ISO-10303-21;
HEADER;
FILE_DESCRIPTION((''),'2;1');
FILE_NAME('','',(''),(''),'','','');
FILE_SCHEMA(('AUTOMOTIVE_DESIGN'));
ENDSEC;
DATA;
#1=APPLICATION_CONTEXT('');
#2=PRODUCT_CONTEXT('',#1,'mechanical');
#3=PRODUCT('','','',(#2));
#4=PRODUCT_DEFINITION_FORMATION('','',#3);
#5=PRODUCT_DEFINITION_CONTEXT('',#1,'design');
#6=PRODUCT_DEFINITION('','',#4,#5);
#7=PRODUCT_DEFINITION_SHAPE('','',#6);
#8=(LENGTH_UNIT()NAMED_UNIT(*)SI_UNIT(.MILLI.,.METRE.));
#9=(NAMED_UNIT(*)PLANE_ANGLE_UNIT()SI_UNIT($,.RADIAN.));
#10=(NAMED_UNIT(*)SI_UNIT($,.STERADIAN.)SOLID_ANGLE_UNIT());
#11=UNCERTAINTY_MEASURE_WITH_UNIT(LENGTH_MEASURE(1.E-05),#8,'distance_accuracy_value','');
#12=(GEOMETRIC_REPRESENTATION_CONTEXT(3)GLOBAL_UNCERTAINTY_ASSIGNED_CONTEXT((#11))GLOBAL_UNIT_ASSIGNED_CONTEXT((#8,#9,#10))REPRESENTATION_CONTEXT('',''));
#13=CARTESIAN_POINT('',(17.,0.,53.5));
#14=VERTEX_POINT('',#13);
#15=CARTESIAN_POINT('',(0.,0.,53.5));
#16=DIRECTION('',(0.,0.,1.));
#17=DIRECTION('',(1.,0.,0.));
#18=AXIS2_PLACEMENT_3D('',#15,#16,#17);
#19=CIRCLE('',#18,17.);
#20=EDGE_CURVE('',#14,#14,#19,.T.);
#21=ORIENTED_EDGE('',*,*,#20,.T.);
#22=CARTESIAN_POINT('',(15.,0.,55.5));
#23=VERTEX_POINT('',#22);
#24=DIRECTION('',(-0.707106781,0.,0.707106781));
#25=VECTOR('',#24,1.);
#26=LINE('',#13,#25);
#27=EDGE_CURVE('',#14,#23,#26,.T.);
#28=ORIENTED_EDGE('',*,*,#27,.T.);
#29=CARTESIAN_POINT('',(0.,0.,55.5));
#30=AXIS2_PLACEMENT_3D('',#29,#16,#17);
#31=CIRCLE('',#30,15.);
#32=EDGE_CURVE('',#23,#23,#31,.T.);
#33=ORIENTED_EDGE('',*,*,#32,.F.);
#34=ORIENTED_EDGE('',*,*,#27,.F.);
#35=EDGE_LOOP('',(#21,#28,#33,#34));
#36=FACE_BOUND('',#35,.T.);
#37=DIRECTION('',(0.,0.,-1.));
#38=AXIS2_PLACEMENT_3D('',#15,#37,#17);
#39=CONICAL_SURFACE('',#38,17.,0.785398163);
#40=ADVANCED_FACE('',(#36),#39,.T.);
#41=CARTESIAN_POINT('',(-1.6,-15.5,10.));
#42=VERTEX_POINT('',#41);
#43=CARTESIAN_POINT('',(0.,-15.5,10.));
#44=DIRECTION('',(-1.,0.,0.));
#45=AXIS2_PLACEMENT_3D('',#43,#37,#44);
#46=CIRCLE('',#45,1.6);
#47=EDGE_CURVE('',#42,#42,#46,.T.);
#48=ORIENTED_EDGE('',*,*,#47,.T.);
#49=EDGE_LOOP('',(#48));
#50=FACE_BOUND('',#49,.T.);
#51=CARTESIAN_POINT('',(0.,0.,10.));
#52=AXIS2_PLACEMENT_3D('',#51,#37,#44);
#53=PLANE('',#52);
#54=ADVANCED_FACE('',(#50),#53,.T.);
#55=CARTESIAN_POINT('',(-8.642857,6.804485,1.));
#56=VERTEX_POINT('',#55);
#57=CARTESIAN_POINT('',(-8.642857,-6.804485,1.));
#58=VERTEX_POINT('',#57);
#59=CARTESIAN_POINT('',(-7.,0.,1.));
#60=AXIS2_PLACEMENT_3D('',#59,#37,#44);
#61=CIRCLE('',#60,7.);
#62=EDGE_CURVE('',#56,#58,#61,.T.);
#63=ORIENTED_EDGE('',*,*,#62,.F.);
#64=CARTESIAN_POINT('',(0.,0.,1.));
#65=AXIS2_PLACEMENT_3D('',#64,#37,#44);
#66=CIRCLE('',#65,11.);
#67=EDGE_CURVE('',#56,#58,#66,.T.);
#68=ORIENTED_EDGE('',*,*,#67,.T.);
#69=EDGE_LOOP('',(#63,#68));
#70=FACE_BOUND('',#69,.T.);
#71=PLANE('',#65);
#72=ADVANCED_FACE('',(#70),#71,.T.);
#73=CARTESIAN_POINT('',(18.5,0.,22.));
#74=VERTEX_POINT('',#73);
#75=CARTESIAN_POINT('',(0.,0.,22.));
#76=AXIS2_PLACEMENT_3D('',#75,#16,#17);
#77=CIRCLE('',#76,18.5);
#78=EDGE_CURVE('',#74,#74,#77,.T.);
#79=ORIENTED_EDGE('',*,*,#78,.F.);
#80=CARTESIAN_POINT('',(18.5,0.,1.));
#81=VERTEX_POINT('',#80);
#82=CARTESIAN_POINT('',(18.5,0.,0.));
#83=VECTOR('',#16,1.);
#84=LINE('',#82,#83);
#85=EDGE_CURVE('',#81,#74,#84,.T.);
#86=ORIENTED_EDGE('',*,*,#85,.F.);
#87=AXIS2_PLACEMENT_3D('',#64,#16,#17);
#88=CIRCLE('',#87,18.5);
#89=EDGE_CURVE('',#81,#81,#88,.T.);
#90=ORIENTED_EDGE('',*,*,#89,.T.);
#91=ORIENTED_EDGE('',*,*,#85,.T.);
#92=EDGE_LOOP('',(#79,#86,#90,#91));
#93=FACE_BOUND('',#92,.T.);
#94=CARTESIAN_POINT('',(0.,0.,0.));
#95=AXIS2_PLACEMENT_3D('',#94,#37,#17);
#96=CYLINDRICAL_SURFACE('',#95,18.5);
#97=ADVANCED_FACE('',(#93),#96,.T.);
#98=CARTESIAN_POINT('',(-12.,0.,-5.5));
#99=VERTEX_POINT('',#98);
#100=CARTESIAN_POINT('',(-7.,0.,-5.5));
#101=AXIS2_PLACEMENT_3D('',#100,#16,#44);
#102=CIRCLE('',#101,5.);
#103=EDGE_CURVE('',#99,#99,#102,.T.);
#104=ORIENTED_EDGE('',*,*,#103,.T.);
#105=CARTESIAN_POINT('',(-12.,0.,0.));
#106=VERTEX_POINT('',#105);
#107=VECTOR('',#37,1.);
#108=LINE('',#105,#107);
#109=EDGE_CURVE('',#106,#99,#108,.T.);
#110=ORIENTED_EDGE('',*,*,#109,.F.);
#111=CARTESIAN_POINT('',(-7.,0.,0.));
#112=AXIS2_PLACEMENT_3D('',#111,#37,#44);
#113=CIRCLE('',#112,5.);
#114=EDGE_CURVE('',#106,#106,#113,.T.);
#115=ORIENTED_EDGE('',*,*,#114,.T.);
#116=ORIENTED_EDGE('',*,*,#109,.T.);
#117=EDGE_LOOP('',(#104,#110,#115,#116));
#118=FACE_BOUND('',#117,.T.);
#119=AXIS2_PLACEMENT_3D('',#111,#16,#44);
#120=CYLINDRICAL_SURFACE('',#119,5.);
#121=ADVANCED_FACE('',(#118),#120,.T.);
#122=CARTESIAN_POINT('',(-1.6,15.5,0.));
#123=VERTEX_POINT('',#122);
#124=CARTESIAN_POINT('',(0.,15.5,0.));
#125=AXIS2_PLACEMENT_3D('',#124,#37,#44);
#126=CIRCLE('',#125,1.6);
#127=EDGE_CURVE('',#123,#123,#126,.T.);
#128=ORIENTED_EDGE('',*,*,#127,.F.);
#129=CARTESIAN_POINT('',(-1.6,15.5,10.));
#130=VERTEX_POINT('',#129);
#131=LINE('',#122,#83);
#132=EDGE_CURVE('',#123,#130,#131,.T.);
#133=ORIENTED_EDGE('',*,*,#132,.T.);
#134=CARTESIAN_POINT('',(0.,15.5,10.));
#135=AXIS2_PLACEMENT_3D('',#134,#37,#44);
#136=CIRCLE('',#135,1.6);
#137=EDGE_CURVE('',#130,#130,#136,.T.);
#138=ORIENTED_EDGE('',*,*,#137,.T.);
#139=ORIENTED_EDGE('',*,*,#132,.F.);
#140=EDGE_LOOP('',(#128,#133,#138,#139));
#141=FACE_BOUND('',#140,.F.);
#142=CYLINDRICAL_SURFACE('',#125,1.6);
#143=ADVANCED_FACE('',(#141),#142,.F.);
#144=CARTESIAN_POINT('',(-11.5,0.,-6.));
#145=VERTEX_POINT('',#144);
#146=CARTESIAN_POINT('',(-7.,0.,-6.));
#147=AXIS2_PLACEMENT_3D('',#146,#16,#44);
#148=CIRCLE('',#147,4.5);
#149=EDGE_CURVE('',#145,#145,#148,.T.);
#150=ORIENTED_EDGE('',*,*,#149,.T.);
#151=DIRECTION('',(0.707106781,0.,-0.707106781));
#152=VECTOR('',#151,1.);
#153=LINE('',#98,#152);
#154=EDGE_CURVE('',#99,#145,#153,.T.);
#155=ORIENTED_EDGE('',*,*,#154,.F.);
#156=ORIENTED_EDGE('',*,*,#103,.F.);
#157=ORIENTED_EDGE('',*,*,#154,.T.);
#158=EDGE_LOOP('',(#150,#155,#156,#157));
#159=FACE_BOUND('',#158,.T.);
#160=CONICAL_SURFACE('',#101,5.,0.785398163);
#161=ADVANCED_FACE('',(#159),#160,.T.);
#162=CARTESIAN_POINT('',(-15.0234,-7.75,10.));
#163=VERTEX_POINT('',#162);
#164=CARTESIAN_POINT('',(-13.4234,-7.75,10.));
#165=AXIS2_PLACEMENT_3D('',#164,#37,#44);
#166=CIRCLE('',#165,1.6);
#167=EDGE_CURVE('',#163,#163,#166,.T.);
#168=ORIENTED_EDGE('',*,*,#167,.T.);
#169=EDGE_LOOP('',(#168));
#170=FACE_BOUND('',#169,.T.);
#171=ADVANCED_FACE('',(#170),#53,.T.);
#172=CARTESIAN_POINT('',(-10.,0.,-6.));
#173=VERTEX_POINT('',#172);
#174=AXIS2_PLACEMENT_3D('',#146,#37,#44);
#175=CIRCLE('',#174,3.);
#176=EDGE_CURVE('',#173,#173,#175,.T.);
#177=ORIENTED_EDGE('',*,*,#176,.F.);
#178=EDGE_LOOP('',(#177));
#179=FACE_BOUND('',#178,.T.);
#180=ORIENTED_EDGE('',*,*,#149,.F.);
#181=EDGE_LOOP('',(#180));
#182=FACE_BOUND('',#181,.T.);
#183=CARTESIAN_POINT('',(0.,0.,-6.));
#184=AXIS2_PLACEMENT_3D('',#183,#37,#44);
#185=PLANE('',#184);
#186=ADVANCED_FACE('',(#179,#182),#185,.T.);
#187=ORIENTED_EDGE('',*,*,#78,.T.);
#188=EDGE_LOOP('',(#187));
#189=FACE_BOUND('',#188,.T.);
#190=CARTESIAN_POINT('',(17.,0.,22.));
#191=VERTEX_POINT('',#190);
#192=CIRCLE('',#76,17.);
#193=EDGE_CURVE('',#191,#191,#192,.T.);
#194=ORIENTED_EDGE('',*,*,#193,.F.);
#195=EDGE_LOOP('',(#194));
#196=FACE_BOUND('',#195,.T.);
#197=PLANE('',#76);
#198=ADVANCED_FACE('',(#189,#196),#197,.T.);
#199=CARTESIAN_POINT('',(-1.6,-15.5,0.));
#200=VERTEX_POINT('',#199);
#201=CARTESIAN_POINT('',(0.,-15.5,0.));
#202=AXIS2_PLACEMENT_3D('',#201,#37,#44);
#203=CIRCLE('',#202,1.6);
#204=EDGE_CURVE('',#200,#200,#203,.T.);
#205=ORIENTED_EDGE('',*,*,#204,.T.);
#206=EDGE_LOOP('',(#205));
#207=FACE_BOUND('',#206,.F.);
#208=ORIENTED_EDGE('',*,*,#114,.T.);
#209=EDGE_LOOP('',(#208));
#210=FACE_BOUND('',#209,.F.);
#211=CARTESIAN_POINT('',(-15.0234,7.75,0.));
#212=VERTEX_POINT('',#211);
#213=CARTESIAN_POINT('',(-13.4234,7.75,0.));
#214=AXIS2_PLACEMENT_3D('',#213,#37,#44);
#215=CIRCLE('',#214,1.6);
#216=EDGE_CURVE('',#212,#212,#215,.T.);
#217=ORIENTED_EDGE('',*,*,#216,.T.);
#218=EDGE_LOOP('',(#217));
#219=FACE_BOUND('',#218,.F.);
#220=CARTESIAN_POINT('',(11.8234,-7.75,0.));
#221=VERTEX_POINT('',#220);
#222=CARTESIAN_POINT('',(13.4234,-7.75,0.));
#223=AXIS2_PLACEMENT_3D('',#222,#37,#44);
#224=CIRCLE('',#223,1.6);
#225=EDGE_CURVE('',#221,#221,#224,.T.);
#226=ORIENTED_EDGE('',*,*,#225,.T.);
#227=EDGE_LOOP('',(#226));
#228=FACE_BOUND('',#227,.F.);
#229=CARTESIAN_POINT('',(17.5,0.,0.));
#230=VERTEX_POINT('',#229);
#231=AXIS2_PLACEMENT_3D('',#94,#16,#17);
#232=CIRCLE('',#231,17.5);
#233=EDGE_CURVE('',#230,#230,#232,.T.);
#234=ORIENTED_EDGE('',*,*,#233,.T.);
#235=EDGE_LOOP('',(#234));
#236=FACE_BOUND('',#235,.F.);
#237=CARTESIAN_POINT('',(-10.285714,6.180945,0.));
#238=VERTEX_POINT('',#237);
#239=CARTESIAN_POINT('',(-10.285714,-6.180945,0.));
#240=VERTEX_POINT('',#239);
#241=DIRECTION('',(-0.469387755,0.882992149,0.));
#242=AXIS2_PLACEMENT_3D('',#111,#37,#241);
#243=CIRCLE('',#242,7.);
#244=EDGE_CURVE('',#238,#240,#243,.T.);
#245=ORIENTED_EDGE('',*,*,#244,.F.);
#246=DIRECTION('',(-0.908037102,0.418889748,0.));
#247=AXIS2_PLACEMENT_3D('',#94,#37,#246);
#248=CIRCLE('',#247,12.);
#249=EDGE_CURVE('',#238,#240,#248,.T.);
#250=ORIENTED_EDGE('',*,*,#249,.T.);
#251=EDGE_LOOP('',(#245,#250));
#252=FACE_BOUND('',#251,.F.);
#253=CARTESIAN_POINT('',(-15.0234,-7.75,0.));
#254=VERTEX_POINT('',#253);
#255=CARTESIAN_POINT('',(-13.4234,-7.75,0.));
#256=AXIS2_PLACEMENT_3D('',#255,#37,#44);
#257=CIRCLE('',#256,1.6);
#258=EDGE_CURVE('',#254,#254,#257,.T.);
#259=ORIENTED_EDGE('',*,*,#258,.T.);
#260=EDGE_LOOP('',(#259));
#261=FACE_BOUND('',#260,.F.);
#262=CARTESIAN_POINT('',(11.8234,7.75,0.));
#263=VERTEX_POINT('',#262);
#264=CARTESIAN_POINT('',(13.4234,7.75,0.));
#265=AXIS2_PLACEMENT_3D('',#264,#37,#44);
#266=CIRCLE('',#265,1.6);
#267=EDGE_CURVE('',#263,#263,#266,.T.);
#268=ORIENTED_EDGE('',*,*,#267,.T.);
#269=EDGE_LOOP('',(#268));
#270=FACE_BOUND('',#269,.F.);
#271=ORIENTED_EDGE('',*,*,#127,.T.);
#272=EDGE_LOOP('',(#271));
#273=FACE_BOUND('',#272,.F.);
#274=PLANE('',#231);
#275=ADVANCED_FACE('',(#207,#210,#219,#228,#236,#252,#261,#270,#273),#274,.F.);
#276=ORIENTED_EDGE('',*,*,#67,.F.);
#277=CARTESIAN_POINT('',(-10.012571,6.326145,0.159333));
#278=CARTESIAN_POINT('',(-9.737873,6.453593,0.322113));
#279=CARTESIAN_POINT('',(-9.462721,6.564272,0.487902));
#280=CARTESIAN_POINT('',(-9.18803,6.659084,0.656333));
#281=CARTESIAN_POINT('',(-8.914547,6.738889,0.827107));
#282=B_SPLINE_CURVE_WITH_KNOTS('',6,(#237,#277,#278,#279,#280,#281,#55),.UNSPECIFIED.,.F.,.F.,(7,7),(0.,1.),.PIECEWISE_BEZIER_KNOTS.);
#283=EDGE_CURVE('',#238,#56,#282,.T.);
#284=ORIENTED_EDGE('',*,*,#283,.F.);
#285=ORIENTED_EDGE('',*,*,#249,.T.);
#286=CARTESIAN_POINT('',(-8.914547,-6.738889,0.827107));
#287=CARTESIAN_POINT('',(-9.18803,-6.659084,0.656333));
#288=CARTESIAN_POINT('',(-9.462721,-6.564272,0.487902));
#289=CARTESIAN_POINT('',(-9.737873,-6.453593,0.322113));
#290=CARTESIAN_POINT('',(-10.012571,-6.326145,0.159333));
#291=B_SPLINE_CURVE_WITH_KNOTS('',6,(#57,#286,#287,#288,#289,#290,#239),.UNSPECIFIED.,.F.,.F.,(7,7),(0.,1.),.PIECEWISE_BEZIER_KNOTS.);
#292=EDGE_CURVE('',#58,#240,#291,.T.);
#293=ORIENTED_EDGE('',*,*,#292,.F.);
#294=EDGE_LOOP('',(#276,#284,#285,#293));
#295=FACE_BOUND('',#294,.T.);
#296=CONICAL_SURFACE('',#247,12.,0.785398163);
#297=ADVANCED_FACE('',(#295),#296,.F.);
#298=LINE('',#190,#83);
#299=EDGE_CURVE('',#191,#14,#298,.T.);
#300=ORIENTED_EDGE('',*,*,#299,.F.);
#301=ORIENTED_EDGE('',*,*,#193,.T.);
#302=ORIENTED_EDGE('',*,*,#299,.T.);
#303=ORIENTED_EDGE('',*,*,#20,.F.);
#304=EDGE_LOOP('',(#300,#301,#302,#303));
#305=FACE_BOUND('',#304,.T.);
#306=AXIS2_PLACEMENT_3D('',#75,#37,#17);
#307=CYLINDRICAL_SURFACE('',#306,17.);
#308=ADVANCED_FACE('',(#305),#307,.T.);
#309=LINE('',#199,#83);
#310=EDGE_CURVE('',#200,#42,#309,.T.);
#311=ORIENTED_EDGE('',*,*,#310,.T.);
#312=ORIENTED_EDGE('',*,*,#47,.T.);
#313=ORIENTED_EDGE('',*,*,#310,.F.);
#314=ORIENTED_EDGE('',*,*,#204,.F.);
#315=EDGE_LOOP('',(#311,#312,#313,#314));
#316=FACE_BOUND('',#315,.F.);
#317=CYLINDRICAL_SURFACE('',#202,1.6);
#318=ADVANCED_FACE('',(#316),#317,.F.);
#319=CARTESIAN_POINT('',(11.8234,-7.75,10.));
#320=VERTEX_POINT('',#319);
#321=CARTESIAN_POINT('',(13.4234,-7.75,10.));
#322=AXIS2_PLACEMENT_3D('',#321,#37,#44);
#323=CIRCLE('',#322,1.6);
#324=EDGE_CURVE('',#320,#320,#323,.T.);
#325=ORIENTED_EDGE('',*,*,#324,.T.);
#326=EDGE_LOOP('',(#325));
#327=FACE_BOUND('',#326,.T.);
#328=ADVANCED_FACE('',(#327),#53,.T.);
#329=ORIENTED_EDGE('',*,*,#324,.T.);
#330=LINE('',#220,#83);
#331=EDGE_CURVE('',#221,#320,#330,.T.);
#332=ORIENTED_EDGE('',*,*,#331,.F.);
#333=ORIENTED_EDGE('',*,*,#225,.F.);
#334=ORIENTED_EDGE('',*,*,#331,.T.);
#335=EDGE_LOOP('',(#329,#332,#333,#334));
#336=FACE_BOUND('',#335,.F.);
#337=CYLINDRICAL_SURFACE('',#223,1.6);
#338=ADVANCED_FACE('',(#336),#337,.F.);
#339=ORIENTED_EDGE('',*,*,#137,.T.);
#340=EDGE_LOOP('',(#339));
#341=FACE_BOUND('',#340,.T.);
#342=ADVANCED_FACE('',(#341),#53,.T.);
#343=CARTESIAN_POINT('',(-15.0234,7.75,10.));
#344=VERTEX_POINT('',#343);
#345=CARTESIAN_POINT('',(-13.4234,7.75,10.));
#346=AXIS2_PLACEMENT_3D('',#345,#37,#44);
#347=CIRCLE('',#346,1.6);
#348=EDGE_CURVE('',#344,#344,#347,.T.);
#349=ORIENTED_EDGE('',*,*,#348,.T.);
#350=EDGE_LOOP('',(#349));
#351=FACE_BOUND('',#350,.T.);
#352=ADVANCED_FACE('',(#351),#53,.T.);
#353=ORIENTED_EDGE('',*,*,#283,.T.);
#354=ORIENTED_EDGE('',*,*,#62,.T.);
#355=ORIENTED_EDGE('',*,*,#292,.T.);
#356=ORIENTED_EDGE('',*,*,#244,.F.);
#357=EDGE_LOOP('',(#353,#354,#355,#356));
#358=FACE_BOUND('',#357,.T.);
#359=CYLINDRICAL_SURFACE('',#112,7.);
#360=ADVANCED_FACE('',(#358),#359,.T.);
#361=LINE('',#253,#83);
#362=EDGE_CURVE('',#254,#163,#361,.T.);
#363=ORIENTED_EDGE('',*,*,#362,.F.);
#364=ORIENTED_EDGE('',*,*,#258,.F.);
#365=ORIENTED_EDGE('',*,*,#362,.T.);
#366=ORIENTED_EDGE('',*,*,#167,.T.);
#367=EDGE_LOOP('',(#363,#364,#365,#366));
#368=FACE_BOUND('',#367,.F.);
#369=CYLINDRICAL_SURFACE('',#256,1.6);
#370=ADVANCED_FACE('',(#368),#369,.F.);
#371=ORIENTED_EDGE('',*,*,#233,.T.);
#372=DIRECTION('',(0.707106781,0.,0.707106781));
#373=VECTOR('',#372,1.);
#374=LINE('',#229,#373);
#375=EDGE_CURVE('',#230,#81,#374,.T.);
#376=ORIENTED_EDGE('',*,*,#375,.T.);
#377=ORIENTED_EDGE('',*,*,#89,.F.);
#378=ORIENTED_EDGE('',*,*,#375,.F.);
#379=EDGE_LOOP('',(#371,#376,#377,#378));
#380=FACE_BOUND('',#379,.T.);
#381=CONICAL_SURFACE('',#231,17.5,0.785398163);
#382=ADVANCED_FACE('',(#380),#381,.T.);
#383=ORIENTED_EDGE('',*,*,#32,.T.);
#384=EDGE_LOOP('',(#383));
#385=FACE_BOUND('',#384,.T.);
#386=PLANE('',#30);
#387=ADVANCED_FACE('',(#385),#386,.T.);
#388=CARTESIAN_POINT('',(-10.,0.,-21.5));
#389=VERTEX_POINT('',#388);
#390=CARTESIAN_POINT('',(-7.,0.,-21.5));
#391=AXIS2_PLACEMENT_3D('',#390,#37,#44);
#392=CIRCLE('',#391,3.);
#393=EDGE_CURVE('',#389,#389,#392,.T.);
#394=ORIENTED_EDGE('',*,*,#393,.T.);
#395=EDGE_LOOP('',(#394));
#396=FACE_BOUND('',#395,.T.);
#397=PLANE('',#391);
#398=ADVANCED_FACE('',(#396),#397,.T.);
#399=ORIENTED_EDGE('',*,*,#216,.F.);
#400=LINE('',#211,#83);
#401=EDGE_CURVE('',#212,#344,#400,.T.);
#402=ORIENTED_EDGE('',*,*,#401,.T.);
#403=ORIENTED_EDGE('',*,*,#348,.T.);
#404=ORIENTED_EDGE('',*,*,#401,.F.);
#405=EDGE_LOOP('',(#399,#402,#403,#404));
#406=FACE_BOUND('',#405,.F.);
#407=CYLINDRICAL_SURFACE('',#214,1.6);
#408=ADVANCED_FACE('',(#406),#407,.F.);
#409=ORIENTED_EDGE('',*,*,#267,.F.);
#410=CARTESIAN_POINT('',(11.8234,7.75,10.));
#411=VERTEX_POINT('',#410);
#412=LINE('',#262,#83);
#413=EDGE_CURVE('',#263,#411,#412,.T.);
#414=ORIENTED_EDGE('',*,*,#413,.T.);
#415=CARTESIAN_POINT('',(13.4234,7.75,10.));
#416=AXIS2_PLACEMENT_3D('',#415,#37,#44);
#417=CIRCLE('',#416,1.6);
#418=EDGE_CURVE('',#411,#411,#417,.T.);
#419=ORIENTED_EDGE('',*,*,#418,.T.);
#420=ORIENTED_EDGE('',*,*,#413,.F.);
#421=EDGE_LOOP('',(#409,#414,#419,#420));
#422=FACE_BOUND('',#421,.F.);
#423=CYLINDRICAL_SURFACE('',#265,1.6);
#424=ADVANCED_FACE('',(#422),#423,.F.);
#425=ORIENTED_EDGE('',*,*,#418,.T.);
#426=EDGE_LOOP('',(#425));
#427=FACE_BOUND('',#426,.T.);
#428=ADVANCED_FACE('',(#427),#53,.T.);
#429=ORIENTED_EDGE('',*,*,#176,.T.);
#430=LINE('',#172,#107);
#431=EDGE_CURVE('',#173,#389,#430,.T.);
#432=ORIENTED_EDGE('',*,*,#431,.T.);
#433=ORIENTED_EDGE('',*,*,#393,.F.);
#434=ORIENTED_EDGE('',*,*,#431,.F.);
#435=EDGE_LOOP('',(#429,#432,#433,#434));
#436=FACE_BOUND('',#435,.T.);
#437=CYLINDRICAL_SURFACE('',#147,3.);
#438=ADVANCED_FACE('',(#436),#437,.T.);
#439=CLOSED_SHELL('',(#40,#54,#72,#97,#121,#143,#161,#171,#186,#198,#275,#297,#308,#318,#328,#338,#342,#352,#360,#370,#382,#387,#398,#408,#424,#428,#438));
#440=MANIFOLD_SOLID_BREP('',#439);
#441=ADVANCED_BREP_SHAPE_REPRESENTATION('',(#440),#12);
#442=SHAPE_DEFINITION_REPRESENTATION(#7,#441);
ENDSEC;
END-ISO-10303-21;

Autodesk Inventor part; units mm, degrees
ref_plane "YZ Plane" through (0, 0, 0) normal (1, 0, 0) x (0, 1, 0)
ref_plane "XZ Plane" through (0, 0, 0) normal (0, 1, 0) x (-1, 0, 0)
ref_plane "XY Plane" through (0, 0, 0) normal (0, 0, 1) x (1, 0, 0)
sketch "草图1" plane through (0, 0, 0) normal (0, 0, 1) x (1, 0, 0)
  circle A0 centre (0, 0) radius 18.5
  dimension "d0" = 37
extrude "拉伸1" add sketch "草图1" along normal blind 22
sketch "草图2" plane through (0, 0, 22) normal (0, 0, 1) x (1, 0, 0)
  circle A0 centre (0, 0) radius 17
  dimension "d3" = 34
extrude "拉伸2" add sketch "草图2" along normal blind 33.5
chamfer "倒角1" distance 2 angle 45 1 edges at (-17, 0, 55.5)
sketch "草图3" plane through (0, 0, 0) normal (0, 0, -1) x (-1, 0, 0)
  circle A0 centre (7, 0) radius 5
  line L0 (33.5538, 0) -> (-37.1398, 0)
  point P0 (0, 0)
  dimension "d9" = 10
  dimension "d10" = 7
extrude "拉伸3" add sketch "草图3" along normal blind 6
sketch "草图4" plane through (-7, 0, -6) normal (0, 0, -1) x (-1, 0, 0)
  circle A0 centre (0, 0) radius 5 projected
  circle A1 centre (0, 0) radius 3
  point P0 (-7, 0)
  dimension "d13" = 6
extrude "拉伸4" add sketch "草图4" along normal blind 15.5 contours A1
chamfer "倒角2" distance 0.5 angle 45 1 edges at (-2, 0, -6)
sketch "草图5" plane through (0, 0, 0) normal (0, 0, -1) x (-1, 0, 0)
  circle A0 centre (7, 0) radius 5 projected
  circle A1 centre (7, 0) radius 7
  circle A2 centre (0, 0) radius 11
  point P0 (8.6429, -6.8045)
  point P1 (8.6429, 6.8045)
  dimension "d19" = 22
extrude "拉伸5" cut sketch "草图5" against normal blind 1 contours A1 A2
chamfer "倒角3" distance 1 angle 45 2 edges at (11, 0, 0) (-18.5, 0, 0)
sketch "草图6" plane through (0, 0, 0) normal (0, 0, -1) x (-1, 0, 0)
  circle A0 centre (0, 0) radius 15.5 construction
  circle A1 centre (0, 15.5) radius 1.6
  line L0 (0, 15.5) -> (0, 0) construction
  arc A2 (10.2857, 6.1809) -> (10.2857, -6.1809) centre (7, 0) ccw projected
  circle A3 centre (-13.4234, 7.75) radius 1.6
  circle A4 centre (-13.4234, -7.75) radius 1.6
  circle A5 centre (0, -15.5) radius 1.6
  circle A6 centre (13.4234, -7.75) radius 1.6
  circle A7 centre (13.4234, 7.75) radius 1.6
  dimension "d25" = 31
  dimension "d26" = 3.2
  dimension "d29" = 360
extrude "拉伸6" cut sketch "草图6" against normal blind 10
properties part number "JGB37-520"
